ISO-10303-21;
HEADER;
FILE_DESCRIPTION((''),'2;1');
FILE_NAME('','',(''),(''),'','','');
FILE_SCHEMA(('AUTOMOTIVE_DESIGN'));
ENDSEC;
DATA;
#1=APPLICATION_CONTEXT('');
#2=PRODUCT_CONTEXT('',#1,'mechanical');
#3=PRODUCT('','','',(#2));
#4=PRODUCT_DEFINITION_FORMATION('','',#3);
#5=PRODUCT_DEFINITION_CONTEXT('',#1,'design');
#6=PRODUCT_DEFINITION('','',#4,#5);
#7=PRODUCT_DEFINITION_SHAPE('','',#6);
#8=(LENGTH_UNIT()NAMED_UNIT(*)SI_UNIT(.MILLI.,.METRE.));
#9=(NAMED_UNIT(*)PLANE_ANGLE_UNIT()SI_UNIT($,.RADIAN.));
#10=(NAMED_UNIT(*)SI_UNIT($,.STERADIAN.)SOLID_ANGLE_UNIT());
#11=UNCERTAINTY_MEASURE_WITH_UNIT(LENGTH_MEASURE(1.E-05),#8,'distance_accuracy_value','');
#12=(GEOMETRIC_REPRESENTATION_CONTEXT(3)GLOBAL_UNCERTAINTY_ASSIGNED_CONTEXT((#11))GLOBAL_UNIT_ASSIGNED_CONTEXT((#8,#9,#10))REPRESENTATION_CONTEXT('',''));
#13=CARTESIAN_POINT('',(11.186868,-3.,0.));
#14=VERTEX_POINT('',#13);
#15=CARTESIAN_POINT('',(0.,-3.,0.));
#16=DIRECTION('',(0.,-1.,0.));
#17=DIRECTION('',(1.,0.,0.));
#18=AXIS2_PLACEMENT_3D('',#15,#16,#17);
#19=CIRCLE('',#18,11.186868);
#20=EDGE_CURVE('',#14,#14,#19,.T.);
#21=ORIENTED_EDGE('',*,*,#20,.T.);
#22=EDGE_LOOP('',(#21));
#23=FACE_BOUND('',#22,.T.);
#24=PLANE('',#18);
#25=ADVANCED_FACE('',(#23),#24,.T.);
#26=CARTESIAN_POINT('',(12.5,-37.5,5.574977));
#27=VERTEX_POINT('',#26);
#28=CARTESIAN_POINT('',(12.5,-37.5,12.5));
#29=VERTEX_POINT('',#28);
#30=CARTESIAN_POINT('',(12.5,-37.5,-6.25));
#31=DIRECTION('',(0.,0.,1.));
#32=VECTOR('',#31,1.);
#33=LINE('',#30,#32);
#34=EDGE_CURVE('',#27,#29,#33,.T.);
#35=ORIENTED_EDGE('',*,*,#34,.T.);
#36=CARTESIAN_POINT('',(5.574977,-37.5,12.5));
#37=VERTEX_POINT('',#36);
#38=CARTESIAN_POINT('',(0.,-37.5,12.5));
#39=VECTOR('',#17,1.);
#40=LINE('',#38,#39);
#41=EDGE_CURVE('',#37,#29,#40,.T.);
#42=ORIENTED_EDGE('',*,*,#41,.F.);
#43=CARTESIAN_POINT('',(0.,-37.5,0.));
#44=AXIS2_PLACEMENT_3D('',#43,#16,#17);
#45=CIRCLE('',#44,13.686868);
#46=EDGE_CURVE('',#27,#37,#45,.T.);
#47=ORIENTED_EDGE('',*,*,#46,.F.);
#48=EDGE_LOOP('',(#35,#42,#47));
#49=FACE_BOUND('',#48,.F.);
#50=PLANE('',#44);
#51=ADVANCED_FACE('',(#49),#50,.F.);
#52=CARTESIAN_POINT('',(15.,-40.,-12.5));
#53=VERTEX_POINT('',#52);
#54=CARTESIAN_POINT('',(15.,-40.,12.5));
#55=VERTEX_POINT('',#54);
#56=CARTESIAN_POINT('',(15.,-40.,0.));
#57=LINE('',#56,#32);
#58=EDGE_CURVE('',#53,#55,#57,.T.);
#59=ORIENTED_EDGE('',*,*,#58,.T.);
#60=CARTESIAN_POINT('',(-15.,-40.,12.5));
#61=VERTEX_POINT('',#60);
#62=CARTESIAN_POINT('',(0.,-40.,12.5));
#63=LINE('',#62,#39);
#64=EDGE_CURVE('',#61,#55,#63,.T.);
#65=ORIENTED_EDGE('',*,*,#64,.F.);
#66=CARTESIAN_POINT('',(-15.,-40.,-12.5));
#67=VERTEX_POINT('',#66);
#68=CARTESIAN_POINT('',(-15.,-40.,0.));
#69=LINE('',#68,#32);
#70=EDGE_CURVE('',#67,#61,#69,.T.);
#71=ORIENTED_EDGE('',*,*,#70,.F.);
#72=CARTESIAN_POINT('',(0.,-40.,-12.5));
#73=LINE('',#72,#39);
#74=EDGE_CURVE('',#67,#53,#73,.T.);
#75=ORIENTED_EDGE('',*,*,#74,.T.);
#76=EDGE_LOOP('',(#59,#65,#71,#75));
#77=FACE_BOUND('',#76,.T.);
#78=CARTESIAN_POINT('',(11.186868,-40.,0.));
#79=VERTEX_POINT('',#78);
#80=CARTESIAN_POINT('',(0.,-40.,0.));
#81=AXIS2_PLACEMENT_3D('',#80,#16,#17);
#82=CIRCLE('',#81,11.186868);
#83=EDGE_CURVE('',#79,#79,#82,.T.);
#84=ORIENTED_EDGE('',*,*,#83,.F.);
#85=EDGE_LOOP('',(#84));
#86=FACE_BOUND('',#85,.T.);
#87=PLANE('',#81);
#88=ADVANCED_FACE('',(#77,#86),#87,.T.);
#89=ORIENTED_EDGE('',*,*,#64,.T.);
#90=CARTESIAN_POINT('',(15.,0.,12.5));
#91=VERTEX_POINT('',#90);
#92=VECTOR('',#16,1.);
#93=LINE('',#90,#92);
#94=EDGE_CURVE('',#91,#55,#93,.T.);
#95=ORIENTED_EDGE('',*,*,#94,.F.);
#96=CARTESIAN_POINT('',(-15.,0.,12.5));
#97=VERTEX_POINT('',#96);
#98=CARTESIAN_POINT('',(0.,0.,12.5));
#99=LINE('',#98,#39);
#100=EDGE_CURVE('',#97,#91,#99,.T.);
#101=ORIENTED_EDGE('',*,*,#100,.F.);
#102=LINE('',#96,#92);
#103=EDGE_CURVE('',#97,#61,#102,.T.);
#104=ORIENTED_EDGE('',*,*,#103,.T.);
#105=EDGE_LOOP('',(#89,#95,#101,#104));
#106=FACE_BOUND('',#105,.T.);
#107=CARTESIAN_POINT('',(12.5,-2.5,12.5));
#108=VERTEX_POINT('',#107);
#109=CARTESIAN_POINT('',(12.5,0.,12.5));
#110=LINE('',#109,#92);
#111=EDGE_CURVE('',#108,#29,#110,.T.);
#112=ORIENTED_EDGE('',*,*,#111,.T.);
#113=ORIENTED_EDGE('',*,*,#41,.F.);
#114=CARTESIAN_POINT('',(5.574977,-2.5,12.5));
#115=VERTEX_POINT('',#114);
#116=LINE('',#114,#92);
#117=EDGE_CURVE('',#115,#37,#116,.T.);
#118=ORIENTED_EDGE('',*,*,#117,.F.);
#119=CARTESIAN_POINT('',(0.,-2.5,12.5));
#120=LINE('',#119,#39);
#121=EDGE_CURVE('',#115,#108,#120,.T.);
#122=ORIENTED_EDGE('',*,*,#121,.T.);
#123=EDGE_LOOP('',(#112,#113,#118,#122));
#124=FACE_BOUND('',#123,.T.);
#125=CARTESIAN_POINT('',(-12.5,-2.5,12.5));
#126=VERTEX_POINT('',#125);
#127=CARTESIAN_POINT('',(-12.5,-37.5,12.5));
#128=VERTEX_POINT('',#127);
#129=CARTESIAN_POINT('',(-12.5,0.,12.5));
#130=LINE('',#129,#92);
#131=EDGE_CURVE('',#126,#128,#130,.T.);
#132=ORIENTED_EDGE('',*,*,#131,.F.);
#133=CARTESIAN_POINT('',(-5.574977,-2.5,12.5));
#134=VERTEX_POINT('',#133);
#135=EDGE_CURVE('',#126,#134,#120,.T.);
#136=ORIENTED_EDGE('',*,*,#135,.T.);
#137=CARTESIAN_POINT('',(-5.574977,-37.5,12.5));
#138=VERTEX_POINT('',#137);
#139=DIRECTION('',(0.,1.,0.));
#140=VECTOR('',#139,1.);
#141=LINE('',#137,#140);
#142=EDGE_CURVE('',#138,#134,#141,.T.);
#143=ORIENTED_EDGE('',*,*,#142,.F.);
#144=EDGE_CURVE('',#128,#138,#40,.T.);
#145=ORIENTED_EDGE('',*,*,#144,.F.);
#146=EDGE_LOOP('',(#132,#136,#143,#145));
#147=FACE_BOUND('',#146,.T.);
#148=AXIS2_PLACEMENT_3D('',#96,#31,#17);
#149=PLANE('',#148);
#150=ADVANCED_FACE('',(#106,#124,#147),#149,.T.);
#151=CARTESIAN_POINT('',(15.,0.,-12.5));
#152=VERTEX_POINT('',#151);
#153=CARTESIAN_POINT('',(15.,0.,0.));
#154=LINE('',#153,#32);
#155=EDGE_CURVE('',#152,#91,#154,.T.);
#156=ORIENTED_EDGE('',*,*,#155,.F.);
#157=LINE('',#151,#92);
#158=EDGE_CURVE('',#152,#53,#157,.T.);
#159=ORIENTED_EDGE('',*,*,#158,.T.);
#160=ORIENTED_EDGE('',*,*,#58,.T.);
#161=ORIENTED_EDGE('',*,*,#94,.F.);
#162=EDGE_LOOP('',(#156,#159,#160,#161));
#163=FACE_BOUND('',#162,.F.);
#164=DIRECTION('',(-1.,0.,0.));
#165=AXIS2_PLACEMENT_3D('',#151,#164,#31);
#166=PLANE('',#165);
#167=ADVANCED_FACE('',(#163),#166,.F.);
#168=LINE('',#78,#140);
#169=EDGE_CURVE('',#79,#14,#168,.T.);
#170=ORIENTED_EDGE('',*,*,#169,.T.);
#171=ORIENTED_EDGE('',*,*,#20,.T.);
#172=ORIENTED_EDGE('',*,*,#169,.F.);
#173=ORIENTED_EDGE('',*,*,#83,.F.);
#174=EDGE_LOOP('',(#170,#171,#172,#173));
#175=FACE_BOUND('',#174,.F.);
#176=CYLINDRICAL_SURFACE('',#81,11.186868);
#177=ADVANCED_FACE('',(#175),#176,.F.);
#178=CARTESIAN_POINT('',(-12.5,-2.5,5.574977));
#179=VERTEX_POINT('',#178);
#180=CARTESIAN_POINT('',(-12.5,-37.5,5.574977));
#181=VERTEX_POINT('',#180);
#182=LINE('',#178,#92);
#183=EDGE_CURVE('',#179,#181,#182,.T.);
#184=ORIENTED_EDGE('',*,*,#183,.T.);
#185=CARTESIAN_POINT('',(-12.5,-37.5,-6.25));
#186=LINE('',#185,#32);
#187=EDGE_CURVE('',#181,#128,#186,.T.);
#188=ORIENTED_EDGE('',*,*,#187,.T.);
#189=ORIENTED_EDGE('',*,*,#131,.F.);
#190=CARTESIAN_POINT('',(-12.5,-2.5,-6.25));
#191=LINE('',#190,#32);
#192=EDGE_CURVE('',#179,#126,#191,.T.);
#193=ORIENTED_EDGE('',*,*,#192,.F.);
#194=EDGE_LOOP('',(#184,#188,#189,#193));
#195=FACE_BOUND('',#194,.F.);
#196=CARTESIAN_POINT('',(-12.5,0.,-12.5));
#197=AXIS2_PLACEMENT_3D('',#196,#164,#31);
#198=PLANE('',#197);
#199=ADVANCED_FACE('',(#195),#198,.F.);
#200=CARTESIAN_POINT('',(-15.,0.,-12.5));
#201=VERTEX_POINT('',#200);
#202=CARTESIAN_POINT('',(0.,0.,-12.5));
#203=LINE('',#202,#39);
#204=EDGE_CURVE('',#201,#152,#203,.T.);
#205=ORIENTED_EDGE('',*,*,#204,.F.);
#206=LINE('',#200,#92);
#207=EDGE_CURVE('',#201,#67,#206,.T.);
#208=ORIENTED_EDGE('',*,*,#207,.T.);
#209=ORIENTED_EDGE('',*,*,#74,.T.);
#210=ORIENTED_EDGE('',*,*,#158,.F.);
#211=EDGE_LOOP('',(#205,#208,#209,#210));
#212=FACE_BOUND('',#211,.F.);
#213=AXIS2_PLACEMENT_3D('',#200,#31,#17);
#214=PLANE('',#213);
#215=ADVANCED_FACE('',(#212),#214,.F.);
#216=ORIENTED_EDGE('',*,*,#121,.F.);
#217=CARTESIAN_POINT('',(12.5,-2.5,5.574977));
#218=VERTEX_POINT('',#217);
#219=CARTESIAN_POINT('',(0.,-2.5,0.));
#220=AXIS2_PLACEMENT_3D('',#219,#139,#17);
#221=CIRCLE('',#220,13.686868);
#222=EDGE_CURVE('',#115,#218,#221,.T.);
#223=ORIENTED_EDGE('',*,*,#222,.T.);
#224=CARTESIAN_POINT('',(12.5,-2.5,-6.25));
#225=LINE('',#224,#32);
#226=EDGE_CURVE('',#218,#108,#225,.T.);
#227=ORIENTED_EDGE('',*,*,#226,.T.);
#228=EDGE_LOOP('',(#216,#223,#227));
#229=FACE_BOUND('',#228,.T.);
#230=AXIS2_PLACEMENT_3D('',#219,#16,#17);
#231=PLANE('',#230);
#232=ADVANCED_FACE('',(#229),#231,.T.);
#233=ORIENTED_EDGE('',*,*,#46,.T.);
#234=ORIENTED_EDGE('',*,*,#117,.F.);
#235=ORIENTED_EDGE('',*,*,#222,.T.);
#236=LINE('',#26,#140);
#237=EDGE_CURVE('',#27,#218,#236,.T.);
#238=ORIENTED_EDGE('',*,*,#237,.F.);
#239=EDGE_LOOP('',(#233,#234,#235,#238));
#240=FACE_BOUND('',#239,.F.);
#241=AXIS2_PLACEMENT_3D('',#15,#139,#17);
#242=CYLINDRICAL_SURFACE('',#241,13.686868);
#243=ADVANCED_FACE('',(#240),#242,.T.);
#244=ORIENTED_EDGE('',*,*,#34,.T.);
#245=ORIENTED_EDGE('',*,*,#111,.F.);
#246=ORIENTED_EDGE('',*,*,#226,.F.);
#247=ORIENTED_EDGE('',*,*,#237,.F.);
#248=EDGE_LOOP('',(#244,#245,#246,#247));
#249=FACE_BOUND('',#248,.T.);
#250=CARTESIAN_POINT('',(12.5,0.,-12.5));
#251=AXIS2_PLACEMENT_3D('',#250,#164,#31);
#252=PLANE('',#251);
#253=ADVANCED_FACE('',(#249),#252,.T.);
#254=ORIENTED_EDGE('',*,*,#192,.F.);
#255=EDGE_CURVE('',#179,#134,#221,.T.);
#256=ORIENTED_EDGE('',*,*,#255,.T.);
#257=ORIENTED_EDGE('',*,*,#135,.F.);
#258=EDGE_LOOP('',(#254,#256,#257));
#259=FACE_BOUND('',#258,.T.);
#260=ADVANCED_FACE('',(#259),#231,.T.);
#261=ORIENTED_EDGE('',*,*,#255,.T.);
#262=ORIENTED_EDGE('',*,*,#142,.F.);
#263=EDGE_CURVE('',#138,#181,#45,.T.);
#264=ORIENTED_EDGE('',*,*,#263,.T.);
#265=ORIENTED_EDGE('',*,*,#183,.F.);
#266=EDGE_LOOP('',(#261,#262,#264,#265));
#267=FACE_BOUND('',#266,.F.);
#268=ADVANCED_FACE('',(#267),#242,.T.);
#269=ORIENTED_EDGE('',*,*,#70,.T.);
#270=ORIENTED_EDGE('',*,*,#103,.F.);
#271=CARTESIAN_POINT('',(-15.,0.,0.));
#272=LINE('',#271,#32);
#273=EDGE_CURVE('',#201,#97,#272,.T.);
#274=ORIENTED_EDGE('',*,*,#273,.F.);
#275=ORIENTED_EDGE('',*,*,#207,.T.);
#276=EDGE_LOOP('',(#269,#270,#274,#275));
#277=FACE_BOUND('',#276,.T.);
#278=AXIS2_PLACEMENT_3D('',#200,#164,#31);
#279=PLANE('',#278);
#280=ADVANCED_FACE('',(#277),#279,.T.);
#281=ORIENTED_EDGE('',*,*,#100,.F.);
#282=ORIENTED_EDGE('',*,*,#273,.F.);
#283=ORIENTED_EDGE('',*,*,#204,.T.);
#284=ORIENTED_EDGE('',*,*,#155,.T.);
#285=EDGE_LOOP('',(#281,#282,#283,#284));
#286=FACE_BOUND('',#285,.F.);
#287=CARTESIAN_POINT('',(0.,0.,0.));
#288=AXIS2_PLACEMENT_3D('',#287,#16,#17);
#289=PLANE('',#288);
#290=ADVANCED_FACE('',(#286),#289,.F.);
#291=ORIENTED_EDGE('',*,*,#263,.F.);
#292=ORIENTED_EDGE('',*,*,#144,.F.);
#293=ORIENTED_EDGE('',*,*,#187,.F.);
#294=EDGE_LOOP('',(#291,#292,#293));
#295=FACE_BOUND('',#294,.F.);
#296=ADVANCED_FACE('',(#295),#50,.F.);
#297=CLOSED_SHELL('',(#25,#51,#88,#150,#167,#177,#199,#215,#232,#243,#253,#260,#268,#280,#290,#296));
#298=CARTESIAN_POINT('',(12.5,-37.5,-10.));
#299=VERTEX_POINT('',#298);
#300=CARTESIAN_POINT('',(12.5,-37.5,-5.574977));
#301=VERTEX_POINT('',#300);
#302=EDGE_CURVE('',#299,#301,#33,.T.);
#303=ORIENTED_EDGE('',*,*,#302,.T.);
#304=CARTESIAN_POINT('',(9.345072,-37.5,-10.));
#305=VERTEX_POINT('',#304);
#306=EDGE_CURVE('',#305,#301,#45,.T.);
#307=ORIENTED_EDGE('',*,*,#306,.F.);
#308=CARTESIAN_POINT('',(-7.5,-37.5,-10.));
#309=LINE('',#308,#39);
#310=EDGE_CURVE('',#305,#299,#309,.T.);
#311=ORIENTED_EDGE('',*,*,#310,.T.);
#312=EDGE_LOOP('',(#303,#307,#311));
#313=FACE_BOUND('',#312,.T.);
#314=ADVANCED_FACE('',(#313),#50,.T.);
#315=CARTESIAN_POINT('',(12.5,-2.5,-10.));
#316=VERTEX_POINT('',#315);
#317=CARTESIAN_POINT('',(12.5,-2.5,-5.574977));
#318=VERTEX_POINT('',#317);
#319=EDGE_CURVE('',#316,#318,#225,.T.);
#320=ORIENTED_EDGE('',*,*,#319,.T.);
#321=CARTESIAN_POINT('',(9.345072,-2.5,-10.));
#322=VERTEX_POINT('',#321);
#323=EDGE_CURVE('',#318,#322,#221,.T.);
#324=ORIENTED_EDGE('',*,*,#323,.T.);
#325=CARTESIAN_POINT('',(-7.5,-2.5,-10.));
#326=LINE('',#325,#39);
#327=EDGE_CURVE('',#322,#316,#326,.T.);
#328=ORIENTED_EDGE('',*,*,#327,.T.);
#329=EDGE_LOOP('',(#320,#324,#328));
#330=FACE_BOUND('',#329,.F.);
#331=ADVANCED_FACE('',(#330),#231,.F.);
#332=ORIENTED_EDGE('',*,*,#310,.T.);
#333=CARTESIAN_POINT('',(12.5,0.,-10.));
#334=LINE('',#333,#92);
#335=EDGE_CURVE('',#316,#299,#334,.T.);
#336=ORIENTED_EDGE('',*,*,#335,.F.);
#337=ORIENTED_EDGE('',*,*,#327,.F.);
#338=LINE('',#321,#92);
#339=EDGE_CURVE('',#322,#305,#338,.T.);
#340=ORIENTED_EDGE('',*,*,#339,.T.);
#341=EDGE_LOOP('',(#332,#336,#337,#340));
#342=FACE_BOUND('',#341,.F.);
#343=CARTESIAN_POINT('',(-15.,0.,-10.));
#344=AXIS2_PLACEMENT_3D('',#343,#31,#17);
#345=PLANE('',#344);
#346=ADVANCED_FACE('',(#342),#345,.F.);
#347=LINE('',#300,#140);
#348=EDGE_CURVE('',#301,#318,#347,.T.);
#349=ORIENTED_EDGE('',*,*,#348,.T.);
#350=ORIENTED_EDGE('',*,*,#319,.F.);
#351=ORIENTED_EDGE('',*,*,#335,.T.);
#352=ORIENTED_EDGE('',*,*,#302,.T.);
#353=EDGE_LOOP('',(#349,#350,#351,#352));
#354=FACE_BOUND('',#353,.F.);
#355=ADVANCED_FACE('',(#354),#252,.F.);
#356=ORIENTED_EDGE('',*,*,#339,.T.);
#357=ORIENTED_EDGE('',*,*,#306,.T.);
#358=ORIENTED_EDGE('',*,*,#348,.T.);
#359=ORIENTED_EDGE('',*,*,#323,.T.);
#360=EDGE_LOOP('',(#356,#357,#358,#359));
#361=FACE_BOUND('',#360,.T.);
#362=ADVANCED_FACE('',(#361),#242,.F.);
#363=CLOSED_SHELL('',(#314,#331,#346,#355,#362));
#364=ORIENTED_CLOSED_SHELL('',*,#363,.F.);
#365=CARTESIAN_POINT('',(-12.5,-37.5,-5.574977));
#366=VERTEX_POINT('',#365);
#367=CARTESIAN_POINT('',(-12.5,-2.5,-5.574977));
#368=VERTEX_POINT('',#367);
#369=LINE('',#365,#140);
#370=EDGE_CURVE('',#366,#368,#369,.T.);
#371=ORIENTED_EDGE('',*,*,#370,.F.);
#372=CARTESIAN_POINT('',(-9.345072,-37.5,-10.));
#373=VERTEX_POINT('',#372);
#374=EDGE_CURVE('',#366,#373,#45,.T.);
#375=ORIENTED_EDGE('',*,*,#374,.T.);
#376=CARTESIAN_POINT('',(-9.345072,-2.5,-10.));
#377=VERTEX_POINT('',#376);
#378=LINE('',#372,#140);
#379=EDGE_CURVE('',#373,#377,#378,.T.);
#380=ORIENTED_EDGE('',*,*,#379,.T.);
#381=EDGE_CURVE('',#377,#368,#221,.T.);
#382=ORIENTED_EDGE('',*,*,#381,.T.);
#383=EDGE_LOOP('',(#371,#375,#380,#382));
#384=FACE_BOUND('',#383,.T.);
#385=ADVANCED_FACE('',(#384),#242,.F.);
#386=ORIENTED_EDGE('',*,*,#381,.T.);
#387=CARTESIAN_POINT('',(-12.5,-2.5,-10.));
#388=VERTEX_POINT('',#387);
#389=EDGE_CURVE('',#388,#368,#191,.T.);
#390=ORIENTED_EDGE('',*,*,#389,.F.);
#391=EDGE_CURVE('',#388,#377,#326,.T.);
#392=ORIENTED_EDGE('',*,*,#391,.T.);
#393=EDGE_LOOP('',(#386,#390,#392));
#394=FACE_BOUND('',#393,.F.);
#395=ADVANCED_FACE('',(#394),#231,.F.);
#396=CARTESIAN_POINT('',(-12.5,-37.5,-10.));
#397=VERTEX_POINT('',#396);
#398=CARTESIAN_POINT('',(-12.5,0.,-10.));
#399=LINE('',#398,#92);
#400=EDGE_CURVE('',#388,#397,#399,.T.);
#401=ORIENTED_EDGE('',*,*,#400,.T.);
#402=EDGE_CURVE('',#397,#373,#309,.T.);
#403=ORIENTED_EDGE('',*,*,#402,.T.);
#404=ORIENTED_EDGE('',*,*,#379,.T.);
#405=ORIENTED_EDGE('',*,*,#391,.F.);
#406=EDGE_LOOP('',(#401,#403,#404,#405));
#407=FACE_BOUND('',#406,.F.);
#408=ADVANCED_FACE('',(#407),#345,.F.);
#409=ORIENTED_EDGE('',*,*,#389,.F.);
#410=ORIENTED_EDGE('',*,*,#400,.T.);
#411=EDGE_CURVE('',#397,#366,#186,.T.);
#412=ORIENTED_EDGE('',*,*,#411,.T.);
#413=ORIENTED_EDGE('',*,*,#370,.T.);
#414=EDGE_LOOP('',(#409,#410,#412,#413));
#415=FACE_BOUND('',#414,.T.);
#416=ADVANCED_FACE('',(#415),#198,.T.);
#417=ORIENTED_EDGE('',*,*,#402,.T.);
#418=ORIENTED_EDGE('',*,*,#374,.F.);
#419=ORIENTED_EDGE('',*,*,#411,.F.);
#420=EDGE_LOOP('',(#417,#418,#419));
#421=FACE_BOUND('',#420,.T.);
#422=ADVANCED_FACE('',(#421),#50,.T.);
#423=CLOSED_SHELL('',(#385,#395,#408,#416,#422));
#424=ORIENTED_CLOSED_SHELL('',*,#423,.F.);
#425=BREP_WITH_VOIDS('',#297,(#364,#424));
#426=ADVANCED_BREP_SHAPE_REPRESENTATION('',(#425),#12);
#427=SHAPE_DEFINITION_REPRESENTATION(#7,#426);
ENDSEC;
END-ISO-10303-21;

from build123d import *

# Parameters (mm, degrees)
F0_W     = 30
F0_H     = 25
F1_DEPTH = 40
F2_R     = 11.1868683522
F3_DEPTH = 37
F4_T     = 2.5


# Not quite as in the source:
# - a shell that OpenCascade refuses in one call is made with other operations: the cavity is built on its own and cut out


with BuildPart() as f1:
    # F0 (on Front) → F1 (new body)
    with BuildSketch(Plane.XZ):
        Rectangle(F0_W, F0_H)
    extrude(amount=F1_DEPTH)

    # F2 (on face) → F3 (cut)
    with BuildSketch(Plane.XZ.offset(40)):
        Circle(F2_R)
    extrude(amount=-F3_DEPTH, mode=Mode.SUBTRACT)

    # F4: shell of thickness 2.5, made by hand


with BuildPart() as f4_core1:
    # F4_t2: copy of F1
    add(f1.part)

    # the walls: a layer under each face that stays
    f4_faces = [f4_core1.faces().sort_by_distance(p)[0] for p in [
        (0, -20, -12.5),
        (-15, -20, 0),
        (15, -20, 0),
        (0, 0, 0),
        (-10, -40, -8.3333333333),
        (-11.1868683522, -21.5, 0),
        (0, -3, 0),
    ]]
    thicken(f4_faces, amount=-F4_T, mode=Mode.SUBTRACT)

    # F4_s3 → F4_t4 (revolve, cut)
    with BuildSketch(Plane.XY):
        Polygon((11.1618683522, -3.025), (13.6868683522, -3), (13.6868683522, -0.5), (11.1868683522, -0.5), align=None)
    revolve(axis=Axis((0, -3, 0), (0, -1, 0)), mode=Mode.SUBTRACT)


with BuildPart() as f1_1:
    add(f1.part)

    # what is left inside the walls is the cavity
    f4_cavity = [f4_core1.part.solids().sort_by_distance(p)[0] for p in [
        (-9.695755, -25.833333, 9.695755),
        (9.695755, -25.833333, 9.695755),
        (11.164727, -25.833333, -7.960164),
        (-11.164727, -25.833333, -7.960164),
    ]]
    add(f4_cavity, mode=Mode.SUBTRACT)


solid = f1_1.part
